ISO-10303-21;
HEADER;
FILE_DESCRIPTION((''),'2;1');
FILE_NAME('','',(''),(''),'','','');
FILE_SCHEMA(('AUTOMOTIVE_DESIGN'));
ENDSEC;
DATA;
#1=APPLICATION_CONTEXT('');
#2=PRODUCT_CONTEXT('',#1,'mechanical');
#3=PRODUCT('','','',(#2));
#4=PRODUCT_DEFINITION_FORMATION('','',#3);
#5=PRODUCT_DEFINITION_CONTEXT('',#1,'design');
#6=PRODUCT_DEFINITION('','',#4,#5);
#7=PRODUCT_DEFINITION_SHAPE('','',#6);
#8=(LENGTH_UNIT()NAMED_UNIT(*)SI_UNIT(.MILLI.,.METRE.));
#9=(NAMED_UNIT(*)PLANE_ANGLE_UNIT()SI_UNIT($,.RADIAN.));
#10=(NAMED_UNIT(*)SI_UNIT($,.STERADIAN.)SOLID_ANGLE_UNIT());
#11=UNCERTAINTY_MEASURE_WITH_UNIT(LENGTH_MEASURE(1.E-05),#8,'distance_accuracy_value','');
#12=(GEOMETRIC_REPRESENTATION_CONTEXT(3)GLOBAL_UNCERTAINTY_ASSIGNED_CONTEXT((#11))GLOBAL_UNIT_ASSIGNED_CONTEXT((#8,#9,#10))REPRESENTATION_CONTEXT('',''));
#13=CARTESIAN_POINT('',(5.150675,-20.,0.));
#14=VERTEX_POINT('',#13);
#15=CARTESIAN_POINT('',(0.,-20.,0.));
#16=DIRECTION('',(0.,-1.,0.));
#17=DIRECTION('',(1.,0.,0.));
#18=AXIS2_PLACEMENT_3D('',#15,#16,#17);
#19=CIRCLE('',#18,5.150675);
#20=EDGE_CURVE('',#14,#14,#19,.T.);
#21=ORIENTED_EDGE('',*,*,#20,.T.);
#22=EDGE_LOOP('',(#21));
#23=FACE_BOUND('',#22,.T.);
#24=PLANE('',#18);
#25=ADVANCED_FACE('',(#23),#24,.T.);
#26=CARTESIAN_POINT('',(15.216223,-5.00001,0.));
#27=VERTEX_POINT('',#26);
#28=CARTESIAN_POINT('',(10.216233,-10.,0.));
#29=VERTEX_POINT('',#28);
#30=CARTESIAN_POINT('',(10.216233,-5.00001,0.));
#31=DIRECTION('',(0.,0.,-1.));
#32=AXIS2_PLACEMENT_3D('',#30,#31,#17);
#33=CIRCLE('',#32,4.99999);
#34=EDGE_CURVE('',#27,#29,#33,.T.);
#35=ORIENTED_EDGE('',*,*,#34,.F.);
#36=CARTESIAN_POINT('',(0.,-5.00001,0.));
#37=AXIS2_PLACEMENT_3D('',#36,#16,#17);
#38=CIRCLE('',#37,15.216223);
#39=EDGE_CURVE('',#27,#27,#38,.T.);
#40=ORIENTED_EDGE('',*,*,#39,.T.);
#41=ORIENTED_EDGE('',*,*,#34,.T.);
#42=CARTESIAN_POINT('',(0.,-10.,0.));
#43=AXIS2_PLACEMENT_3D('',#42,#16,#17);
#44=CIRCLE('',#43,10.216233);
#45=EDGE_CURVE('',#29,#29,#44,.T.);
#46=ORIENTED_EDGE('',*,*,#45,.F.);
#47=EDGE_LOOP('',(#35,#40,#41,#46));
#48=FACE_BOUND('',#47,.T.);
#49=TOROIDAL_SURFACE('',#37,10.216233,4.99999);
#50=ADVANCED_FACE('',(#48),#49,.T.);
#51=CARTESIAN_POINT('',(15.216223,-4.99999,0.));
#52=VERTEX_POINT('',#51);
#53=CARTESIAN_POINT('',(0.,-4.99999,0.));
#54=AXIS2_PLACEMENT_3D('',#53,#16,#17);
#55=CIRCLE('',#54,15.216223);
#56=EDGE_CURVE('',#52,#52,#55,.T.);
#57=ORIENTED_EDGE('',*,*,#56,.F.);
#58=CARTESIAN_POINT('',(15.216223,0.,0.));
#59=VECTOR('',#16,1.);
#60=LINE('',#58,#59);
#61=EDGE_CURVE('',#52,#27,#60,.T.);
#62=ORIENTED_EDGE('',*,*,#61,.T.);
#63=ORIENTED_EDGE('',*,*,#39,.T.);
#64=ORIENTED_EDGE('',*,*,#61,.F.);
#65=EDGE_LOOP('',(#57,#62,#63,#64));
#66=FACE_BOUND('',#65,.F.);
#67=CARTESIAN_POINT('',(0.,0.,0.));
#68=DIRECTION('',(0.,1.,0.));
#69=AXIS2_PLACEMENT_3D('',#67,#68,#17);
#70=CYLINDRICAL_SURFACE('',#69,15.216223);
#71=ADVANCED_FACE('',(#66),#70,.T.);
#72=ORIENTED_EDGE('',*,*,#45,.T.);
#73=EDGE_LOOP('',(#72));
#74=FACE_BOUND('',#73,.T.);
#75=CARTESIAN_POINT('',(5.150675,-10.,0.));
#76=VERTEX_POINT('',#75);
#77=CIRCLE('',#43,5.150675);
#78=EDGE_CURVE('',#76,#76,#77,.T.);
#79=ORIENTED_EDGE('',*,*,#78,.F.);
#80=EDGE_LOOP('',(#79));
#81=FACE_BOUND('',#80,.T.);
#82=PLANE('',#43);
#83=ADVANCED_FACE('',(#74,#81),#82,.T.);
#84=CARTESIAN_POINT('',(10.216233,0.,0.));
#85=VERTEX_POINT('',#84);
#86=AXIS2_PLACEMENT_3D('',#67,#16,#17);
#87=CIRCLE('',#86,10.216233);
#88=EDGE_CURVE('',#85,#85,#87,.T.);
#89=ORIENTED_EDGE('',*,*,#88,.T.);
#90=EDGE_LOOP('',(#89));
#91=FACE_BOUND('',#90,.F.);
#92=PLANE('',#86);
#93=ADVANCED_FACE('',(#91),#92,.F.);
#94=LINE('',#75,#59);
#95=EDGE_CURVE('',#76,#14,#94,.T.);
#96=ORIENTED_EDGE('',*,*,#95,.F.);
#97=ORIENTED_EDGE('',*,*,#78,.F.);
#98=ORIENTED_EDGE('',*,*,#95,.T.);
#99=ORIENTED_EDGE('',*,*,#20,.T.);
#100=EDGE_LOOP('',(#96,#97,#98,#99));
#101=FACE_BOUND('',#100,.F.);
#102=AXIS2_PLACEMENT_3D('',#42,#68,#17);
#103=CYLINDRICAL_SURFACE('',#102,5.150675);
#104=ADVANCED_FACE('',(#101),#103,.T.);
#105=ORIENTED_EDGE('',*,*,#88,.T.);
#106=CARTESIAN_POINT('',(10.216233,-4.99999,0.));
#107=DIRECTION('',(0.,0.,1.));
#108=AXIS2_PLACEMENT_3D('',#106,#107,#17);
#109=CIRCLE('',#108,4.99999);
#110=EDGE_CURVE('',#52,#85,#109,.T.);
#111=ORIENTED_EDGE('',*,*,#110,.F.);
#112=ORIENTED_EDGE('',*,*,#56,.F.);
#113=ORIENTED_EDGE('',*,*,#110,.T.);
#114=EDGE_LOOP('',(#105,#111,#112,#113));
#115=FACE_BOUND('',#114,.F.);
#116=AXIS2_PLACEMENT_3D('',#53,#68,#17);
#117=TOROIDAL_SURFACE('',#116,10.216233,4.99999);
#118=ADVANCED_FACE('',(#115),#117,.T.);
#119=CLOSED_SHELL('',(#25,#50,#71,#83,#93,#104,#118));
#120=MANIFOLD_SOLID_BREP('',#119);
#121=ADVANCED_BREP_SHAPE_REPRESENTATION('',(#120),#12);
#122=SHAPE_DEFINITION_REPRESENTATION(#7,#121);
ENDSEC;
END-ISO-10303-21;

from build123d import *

# Parameters (mm, degrees)
F0_R     = 15.2162229734
F1_DEPTH = 10
F2_R     = 5.1506751803
F3_DEPTH = 10
F4_R     = 4.99999


# Not quite as in the source:
# - a fillet or chamfer is up to 0.001 mm smaller than in the source, because OpenCascade refuses the exact size


with BuildPart() as f1:
    # F0 (on Front) → F1 (new body)
    with BuildSketch(Plane.XZ):
        Circle(F0_R)
    extrude(amount=F1_DEPTH)

    # F2 (on face) → F3 (join)
    with BuildSketch(Plane.XZ.offset(10)):
        Circle(F2_R)
    extrude(amount=F3_DEPTH)

    # F4 (radius 5 in the source; OpenCascade refuses exactly that, so slightly less here)
    f4_edges = [f1.edges().sort_by_distance(p)[0] for p in [
        (15.216223, -5, 0),
        (-15.216223, 0, 0),
        (-15.216223, -10, 0),
    ]]
    fillet(f4_edges, radius=F4_R)


solid = f1.part
